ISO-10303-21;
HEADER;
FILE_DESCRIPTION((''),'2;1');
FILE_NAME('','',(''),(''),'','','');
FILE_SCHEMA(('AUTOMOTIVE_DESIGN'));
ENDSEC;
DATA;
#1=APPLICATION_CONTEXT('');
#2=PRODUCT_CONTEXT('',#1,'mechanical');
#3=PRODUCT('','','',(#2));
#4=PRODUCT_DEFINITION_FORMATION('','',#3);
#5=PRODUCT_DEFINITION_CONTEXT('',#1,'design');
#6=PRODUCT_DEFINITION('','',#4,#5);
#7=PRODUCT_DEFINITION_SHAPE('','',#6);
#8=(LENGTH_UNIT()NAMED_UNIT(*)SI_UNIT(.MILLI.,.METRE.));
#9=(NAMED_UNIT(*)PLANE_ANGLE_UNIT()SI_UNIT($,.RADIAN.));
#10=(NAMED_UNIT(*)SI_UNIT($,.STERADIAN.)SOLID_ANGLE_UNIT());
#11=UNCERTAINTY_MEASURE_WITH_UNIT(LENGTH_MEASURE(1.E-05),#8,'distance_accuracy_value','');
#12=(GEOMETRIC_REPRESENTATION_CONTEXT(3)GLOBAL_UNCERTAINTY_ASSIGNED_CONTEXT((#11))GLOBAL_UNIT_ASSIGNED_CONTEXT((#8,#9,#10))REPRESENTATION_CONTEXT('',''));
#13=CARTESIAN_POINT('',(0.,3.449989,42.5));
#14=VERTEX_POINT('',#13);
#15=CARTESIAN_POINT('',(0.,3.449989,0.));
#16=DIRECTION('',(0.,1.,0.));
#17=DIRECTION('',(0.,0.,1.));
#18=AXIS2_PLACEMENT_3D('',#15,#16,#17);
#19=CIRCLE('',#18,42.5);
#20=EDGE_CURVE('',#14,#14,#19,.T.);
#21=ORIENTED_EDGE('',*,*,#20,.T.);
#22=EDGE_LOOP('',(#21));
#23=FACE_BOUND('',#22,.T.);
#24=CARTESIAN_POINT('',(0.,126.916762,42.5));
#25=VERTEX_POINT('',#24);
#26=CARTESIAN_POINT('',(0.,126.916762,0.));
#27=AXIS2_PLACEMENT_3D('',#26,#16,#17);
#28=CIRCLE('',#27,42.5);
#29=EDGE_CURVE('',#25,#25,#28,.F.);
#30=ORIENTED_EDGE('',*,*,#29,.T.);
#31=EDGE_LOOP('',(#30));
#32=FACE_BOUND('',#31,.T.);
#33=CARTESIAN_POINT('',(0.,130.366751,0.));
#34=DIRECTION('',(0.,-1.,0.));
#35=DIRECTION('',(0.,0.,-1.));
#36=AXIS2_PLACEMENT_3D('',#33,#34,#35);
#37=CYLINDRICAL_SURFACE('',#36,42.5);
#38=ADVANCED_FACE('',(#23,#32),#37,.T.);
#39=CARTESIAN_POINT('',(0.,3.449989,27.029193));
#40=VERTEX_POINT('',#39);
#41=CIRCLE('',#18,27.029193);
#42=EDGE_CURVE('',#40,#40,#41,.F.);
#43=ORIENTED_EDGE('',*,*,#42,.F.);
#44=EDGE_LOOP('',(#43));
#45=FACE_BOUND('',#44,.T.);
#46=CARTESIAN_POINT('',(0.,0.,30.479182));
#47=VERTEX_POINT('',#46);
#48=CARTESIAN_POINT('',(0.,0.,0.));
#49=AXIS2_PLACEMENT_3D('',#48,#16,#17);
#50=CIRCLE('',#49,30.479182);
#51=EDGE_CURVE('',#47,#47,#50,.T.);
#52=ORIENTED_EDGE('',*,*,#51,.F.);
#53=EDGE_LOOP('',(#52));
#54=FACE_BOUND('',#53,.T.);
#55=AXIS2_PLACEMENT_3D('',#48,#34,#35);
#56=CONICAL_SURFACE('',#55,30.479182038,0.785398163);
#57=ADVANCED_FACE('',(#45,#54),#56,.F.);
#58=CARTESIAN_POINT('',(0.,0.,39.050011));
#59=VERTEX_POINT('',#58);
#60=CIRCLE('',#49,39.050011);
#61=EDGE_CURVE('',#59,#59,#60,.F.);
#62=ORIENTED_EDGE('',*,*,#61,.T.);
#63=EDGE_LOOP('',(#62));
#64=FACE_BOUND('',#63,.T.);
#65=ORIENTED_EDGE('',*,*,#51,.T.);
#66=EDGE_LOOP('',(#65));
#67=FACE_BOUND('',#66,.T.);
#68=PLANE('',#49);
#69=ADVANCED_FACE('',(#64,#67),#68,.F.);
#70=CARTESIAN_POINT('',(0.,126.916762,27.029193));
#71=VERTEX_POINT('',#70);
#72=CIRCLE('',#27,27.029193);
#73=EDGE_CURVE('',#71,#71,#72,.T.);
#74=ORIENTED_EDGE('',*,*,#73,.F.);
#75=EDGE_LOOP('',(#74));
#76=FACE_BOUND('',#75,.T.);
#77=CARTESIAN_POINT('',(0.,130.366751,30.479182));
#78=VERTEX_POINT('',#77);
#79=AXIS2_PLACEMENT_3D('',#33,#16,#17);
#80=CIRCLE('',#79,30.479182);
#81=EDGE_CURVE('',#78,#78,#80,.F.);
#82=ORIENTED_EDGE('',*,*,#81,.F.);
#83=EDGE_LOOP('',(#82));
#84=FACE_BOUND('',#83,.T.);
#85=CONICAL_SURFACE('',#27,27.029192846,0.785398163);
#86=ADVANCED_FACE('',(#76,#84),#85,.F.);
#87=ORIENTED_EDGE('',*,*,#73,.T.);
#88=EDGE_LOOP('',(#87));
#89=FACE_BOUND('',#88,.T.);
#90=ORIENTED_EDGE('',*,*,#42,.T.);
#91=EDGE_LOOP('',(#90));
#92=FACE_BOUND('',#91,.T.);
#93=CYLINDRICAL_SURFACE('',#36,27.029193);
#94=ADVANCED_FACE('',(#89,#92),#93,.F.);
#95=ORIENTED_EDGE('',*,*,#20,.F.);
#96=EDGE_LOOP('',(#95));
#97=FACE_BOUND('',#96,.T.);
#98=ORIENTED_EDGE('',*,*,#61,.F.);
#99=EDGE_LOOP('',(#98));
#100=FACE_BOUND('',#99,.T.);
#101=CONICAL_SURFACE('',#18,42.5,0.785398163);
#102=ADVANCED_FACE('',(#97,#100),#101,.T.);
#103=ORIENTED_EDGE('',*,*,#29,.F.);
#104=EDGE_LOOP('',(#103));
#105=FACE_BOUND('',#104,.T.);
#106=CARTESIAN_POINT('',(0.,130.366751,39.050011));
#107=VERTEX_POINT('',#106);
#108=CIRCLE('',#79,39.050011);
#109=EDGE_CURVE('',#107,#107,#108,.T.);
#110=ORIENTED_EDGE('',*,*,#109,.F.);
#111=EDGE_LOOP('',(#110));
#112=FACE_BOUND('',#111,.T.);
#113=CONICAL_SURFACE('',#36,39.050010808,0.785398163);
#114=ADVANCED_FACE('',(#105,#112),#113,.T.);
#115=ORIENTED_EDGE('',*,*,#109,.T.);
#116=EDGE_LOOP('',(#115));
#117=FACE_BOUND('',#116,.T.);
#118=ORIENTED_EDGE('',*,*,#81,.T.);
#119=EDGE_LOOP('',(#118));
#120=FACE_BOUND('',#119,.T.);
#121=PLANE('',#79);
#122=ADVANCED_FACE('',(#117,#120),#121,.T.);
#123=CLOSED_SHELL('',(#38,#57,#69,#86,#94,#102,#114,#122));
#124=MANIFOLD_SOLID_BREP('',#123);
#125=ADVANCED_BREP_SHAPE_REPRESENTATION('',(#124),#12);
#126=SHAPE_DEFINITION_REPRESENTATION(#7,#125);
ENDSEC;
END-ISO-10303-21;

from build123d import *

# Parameters (mm, degrees)
SKETCH1_R           = 42.5
BOSS_EXTRUDE1_DEPTH = 130.366750899
SKETCH2_R           = 27.029192846
CUT_EXTRUDE1_DEPTH  = 144.554831824
CHAMFER1_SIZE       = 3.449989192


with BuildPart() as part:
    # Sketch1 → Boss-Extrude1 (new body)
    with BuildSketch(Plane(origin=(0, 0, 0), x_dir=(1, 0, 0), z_dir=(0, 1, 0))):
        Circle(SKETCH1_R)
    extrude(amount=BOSS_EXTRUDE1_DEPTH)

    # Sketch2 → Cut-Extrude1 (cut, through all)
    with BuildSketch(Plane(origin=(0, 0, 0), x_dir=(1, 0, 0), z_dir=(0, 1, 0))):
        Circle(SKETCH2_R)
    extrude(amount=CUT_EXTRUDE1_DEPTH, mode=Mode.SUBTRACT)

    # Chamfer1
    chamfer1_edges = [part.edges().sort_by_distance(p)[0] for p in [
        (-27.029192846, 130.366750899, 0),
        (-27.029192846, 0, 0),
        (-42.5, 0, 0),
        (-42.5, 130.366750899, 0),
    ]]
    chamfer(chamfer1_edges, length=CHAMFER1_SIZE)


solid = part.part
